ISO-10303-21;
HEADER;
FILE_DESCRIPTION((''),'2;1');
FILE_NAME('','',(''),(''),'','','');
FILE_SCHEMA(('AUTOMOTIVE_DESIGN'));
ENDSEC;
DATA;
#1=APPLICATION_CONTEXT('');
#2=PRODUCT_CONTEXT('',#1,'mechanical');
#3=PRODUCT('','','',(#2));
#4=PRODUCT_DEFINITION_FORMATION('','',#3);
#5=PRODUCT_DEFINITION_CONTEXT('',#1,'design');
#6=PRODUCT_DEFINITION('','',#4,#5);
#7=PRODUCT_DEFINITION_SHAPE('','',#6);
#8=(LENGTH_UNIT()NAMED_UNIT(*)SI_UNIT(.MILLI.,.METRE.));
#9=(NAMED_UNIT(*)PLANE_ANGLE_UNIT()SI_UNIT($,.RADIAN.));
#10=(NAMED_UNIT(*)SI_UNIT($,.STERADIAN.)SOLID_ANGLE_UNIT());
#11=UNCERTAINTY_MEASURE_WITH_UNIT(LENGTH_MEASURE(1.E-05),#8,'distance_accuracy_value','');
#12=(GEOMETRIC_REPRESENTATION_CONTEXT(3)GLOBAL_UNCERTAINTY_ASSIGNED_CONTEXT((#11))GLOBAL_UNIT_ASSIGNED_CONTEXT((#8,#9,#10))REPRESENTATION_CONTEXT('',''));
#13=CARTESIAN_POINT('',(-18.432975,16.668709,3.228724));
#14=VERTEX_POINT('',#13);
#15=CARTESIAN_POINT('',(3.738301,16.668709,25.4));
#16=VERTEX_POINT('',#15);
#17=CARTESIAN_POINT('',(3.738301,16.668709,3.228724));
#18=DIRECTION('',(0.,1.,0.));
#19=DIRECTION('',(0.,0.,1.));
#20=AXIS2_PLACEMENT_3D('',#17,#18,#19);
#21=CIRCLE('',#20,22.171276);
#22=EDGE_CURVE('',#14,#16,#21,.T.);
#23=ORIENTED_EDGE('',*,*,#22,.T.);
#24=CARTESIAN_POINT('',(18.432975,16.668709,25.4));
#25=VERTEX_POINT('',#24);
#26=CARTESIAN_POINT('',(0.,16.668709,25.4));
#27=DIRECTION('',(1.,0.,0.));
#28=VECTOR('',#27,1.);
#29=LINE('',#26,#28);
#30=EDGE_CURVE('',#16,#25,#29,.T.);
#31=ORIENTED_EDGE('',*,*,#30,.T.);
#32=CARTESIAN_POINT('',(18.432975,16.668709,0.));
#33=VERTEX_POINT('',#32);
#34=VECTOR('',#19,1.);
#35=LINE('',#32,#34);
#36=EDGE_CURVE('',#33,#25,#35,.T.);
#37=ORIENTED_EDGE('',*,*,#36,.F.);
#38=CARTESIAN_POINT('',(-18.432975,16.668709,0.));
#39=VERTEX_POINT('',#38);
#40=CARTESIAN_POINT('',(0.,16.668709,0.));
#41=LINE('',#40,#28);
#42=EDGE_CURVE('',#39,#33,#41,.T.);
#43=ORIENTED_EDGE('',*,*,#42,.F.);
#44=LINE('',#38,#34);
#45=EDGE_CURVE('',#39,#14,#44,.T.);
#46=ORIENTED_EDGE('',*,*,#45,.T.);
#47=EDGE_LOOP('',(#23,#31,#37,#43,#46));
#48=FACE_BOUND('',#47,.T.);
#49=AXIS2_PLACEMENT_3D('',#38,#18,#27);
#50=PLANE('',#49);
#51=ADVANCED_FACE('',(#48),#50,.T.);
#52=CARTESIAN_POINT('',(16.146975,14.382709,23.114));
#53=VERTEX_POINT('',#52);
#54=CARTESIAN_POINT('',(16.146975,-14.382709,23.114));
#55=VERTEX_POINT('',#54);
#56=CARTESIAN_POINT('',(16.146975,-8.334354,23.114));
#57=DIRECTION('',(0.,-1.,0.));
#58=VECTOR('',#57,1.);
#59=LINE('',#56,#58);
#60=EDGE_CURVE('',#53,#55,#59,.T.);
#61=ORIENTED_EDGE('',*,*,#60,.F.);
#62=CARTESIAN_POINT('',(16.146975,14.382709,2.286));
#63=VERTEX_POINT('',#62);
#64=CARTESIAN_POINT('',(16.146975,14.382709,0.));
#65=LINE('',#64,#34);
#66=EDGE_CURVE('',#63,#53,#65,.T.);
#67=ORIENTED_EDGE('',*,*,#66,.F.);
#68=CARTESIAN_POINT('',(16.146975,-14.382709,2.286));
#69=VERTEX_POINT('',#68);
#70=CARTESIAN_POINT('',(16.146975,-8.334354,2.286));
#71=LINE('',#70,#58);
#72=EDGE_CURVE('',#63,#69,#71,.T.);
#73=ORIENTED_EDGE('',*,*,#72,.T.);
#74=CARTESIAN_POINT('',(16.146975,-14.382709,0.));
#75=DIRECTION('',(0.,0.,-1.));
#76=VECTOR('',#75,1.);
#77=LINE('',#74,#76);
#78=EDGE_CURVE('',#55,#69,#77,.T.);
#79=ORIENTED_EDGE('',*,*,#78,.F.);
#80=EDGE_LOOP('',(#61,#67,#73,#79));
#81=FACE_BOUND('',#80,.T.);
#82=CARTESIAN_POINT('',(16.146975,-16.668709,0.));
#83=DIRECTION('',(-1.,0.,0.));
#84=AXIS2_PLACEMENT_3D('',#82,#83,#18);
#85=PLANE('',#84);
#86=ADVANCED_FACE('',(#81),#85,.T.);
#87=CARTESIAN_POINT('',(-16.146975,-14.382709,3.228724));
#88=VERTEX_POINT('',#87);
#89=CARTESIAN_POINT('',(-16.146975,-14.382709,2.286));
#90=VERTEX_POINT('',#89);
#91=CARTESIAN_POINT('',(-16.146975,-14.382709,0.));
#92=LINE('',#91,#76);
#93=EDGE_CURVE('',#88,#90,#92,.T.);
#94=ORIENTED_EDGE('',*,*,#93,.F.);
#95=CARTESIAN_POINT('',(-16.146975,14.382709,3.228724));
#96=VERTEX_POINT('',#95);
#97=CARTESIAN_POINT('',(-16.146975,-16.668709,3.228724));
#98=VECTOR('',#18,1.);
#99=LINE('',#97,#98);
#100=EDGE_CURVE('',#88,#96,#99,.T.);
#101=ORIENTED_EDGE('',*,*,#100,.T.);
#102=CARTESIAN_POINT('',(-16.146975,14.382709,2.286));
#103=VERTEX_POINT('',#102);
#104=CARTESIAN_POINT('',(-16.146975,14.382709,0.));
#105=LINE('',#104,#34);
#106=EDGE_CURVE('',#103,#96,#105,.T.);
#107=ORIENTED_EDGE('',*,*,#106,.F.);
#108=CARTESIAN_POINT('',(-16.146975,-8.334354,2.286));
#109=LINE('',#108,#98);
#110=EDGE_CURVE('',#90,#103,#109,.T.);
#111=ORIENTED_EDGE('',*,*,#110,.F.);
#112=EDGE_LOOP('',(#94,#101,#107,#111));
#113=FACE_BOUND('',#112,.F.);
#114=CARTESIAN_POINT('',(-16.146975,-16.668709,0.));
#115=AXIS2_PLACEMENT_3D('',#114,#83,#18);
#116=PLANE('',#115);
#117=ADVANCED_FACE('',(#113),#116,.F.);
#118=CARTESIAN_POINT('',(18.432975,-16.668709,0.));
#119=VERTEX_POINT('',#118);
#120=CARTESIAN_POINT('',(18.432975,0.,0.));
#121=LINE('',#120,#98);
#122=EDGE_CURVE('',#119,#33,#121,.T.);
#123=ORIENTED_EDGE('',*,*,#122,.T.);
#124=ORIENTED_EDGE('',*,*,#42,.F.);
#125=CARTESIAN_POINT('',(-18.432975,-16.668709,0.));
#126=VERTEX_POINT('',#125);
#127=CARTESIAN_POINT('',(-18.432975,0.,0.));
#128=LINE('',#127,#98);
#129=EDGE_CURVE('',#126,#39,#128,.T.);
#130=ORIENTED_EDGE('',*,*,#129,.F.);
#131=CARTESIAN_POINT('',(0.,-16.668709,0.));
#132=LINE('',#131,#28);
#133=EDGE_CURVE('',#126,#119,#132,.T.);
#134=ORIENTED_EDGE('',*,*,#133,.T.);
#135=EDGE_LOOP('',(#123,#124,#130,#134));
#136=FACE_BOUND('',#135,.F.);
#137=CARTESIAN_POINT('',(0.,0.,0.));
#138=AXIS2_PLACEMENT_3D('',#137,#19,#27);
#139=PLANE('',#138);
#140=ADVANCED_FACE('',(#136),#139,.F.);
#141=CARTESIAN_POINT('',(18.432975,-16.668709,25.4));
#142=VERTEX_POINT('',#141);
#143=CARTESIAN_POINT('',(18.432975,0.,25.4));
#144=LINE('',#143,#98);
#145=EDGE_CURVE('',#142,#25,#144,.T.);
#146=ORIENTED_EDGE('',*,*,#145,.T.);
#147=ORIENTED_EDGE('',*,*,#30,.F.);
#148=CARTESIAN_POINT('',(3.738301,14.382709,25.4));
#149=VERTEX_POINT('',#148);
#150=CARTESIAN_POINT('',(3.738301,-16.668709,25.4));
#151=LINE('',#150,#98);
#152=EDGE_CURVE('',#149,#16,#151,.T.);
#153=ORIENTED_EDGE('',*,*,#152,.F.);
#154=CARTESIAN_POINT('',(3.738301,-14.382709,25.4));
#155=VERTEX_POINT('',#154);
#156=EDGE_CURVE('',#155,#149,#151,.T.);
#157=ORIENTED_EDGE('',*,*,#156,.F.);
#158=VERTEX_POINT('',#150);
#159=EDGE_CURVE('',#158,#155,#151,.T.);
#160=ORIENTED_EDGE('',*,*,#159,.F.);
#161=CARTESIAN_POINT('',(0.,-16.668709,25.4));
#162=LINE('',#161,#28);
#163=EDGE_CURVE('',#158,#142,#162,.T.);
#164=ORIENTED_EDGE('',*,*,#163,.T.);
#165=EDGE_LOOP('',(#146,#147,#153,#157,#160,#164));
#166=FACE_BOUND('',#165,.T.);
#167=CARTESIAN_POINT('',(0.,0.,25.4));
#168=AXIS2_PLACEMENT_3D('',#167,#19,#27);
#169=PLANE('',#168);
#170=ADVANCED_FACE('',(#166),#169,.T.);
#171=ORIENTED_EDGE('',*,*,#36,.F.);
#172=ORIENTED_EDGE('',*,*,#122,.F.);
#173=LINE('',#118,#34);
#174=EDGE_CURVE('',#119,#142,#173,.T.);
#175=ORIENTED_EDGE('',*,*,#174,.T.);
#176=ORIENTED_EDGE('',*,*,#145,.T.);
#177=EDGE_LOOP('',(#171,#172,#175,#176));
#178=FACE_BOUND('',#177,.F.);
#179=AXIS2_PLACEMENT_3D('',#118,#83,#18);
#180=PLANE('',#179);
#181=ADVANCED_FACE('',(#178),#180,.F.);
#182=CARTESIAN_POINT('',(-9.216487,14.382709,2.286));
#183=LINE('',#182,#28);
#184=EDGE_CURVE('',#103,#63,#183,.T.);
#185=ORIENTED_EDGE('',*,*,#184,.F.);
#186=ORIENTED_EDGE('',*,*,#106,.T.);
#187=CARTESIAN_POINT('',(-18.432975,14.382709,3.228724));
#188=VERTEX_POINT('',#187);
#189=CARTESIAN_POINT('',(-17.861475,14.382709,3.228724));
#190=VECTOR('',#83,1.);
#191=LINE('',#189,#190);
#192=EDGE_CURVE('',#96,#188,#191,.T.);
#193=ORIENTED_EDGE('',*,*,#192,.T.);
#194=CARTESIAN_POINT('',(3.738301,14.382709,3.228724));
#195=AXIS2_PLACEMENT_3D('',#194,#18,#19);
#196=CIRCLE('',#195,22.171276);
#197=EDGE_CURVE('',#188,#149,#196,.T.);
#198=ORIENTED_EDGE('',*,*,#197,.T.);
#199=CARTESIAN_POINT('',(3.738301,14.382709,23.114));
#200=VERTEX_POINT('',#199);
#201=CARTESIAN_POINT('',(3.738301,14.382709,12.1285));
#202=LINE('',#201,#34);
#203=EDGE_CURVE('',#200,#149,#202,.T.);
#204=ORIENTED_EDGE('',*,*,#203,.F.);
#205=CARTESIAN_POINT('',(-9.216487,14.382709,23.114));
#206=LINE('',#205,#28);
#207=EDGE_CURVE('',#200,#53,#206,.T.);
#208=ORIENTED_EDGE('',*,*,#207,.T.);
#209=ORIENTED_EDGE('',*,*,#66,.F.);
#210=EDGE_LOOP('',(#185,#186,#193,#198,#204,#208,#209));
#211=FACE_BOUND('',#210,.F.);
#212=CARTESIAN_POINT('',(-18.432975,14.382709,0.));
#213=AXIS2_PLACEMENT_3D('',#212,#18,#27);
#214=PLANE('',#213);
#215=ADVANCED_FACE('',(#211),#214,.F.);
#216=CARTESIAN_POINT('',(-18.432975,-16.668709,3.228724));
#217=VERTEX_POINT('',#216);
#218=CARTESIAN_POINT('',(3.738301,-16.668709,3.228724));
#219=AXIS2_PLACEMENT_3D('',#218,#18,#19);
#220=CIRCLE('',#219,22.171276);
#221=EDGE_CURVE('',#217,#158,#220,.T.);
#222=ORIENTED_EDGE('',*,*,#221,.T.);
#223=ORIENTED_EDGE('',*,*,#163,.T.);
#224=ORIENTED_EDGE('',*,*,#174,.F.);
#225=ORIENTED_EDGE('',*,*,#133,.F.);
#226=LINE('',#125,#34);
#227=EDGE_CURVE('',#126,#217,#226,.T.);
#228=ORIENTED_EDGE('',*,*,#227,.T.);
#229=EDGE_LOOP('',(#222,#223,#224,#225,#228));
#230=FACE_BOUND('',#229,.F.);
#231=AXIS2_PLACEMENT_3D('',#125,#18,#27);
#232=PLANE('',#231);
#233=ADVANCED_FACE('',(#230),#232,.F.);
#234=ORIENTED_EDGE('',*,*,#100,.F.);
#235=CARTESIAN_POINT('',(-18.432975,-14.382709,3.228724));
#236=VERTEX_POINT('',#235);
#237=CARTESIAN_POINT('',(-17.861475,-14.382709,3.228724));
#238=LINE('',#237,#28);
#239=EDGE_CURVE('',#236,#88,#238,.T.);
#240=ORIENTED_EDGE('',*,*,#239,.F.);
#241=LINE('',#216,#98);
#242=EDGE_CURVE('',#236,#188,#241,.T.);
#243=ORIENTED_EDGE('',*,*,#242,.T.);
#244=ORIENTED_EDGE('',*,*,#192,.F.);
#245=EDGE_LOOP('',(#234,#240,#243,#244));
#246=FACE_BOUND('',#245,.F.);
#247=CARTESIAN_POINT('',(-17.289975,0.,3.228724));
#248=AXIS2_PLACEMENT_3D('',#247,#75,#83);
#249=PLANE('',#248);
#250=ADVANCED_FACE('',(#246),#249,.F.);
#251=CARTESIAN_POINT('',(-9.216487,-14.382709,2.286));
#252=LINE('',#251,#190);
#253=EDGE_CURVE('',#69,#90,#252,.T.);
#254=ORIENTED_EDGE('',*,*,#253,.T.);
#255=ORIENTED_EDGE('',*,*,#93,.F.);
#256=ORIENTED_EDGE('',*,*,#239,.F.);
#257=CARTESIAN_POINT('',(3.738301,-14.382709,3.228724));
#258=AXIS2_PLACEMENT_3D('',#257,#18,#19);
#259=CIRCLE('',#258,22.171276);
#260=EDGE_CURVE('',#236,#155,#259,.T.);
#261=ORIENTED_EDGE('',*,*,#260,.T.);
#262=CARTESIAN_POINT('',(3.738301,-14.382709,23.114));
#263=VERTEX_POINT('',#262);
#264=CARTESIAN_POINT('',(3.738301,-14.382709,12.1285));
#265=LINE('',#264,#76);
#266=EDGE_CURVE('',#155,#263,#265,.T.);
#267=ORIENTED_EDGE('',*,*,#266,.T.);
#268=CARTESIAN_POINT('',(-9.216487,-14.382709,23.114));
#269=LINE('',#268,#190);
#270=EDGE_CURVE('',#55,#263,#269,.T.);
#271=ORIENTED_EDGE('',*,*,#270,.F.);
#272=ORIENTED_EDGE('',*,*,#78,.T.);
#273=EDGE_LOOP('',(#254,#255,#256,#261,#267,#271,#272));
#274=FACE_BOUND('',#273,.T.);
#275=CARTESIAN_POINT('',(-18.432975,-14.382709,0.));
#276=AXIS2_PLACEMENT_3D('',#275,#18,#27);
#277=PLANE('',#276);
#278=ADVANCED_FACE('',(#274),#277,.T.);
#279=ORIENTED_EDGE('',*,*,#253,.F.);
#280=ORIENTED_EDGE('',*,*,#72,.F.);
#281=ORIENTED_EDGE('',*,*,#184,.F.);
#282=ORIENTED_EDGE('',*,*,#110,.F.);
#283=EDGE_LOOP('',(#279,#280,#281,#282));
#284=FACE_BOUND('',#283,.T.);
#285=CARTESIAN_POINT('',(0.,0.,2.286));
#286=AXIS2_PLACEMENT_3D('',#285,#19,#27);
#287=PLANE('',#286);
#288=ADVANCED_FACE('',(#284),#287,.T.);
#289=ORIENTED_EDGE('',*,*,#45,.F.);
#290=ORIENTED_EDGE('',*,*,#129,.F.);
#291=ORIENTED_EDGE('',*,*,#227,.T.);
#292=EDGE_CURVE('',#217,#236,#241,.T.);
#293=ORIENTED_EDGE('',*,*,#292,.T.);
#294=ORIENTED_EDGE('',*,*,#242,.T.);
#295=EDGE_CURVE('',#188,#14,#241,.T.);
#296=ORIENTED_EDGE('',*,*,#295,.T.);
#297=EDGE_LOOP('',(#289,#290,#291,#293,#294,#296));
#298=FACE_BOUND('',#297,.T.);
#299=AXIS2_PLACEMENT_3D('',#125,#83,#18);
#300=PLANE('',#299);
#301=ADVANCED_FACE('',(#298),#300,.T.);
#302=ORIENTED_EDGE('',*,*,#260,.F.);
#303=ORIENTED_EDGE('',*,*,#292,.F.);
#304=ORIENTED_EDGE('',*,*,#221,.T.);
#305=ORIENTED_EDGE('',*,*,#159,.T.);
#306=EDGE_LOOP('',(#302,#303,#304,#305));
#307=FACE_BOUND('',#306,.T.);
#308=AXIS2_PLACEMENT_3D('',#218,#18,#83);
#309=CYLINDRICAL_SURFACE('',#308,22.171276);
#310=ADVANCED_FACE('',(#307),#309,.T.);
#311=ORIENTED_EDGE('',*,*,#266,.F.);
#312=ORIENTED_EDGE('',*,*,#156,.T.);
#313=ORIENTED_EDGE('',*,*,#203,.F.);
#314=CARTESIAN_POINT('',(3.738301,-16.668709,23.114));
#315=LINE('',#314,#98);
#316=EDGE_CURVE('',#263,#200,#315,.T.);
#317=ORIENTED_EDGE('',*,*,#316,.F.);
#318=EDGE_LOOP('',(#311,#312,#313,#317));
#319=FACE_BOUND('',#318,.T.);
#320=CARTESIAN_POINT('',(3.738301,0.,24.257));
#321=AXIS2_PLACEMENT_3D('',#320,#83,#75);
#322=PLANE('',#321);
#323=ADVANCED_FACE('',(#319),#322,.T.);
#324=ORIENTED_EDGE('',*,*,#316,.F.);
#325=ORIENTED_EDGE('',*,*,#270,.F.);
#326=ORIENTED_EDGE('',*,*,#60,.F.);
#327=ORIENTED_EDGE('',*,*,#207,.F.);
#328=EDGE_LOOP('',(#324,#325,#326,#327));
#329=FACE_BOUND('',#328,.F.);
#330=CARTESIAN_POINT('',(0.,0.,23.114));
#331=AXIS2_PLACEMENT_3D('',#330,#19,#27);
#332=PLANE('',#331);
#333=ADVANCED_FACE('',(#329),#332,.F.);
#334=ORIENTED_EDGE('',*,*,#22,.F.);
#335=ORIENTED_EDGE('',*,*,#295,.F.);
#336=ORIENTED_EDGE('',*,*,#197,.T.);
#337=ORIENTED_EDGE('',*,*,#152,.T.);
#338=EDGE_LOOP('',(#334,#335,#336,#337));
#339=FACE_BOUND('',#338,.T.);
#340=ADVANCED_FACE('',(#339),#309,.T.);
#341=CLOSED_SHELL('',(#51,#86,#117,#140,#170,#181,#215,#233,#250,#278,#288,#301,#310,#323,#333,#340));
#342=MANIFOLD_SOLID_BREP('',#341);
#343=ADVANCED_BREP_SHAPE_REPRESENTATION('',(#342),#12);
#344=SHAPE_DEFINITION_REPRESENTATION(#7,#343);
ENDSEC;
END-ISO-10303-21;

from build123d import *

# Parameters (mm, degrees)
F0_W     = 36.8659496307
F0_H     = 33.33741799
F1_DEPTH = 25.4
F2_R     = 22.1712758518
F3_T     = 2.286


# Not quite as in the source:
# - a shell that OpenCascade refuses in one call is made with other operations: the cavity is built on its own and cut out


with BuildPart() as f1:
    # F0 (on Top) → F1 (new body)
    with BuildSketch(Plane.XY):
        Rectangle(F0_W, F0_H)
    extrude(amount=F1_DEPTH)

    # F2
    f2_edges = [f1.edges().sort_by_distance(p)[0] for p in [
        (-18.432975, 0, 25.4),
    ]]
    fillet(f2_edges, radius=F2_R)

    # F3: shell of thickness 2.286, made by hand


with BuildPart() as f3_core1:
    # F3_t2: copy of F1
    add(f1.part)

    # the walls: a layer under each face that stays
    f3_faces = [f3_core1.faces().sort_by_distance(p)[0] for p in [
        (0, 16.668708995, 12.7),
        (-18.4329748154, 0, 1.6143620741),
        (0, 0, 0),
        (11.0856379259, 0, 25.4),
        (18.4329748154, 0, 12.7),
        (0, -16.668708995, 12.7),
    ]]
    thicken(f3_faces, amount=-F3_T, mode=Mode.SUBTRACT)


with BuildPart() as f1_1:
    add(f1.part)

    # what is left inside the walls is the cavity
    f3_cavity = [f3_core1.part.solids().sort_by_distance(p)[0] for p in [
        (-11.922994, 4.794236, 18.890019),
    ]]
    add(f3_cavity, mode=Mode.SUBTRACT)


solid = f1_1.part
